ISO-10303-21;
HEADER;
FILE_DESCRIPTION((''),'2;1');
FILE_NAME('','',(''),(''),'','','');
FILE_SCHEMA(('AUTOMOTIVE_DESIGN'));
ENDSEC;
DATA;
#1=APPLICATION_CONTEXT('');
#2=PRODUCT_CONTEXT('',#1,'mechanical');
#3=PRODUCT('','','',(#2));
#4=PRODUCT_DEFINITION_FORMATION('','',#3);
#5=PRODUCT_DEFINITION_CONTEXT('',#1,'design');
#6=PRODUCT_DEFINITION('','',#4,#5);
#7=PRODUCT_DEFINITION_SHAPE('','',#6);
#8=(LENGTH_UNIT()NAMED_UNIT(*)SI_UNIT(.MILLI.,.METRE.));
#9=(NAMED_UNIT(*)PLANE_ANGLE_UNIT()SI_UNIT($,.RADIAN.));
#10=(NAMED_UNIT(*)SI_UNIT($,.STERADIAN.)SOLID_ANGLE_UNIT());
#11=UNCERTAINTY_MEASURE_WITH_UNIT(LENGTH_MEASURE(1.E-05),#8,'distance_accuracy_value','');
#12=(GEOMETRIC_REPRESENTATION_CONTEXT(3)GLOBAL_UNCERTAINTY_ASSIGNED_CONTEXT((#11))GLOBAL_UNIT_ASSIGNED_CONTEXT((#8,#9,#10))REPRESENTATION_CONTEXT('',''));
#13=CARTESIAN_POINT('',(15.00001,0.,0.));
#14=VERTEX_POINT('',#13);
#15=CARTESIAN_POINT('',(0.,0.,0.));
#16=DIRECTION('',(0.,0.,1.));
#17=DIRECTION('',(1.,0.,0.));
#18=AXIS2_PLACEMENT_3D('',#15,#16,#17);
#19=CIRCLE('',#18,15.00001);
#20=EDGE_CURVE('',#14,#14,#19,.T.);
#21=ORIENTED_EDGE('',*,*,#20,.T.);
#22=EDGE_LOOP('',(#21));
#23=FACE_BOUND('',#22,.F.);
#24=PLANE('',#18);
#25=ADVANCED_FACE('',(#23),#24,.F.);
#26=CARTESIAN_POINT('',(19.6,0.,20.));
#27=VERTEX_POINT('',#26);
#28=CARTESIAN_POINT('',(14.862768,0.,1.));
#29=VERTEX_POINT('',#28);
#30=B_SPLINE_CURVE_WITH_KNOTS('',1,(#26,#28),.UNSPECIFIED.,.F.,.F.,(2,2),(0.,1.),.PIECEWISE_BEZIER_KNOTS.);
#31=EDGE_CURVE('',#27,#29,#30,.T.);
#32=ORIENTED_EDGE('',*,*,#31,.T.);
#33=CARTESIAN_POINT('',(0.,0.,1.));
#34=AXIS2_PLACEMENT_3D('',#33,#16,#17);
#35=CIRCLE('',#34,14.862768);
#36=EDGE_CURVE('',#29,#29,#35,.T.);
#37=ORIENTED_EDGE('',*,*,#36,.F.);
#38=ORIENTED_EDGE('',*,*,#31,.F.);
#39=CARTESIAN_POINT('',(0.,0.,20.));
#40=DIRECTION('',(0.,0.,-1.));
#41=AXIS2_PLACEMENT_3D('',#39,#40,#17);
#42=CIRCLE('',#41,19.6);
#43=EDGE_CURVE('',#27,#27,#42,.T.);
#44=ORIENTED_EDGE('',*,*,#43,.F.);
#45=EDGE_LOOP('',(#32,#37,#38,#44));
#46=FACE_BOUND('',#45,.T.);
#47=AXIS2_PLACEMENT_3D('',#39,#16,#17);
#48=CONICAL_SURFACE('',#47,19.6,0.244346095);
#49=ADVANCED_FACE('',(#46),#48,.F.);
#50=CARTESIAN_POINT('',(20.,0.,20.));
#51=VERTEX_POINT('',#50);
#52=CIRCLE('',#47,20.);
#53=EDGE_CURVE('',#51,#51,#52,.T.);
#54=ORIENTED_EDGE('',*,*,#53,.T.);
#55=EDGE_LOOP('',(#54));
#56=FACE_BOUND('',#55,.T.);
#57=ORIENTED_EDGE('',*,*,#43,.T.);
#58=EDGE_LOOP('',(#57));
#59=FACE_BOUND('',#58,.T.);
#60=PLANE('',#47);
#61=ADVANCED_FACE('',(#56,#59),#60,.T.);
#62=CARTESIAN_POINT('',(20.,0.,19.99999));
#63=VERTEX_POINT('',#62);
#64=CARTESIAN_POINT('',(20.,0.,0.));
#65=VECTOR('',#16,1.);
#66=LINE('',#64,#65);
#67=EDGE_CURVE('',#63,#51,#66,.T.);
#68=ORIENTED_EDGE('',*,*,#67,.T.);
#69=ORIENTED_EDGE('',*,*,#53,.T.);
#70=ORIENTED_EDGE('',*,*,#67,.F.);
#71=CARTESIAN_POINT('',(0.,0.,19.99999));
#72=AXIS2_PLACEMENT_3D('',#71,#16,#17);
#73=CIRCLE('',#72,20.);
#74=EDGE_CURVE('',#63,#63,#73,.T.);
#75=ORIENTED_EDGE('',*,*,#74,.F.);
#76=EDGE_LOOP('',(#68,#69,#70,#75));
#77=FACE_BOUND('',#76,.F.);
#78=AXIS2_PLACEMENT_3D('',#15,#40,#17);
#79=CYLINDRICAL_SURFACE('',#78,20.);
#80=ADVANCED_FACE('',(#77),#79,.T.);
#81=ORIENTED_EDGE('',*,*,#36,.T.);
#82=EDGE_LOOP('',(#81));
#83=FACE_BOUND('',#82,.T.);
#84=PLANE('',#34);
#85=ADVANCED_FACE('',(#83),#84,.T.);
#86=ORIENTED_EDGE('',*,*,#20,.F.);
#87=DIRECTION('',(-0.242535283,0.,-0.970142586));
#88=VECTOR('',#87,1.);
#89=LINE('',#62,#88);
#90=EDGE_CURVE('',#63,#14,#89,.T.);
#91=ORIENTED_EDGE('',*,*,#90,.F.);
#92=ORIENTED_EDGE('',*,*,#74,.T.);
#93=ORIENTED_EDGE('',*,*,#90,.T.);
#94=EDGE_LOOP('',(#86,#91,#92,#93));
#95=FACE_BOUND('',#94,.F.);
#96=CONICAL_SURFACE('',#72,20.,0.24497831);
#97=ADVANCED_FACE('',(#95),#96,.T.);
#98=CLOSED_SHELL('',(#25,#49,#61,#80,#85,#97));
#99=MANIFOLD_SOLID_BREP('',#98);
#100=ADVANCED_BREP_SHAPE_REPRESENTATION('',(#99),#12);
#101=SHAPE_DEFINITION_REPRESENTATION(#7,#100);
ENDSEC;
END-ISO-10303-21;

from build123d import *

# Parameters (mm, degrees)
F0_R     = 20
F1_DEPTH = 20
F2_SIZE2 = 4.99999
F2_SIZE  = 19.99999
F3_R     = 19.6
F4_DEPTH = 19
F4_TAPER = 14


# Not quite as in the source:
# - a fillet or chamfer is up to 0.001 mm smaller than in the source, because OpenCascade refuses the exact size


with BuildPart() as f1:
    # F0 (on Top) → F1 (new body)
    with BuildSketch(Plane.XY):
        Circle(F0_R)
    extrude(amount=F1_DEPTH)

    # F2 (size 20 and 5 in the source; OpenCascade refuses exactly that, so slightly less here)
    f2_edges = [f1.edges().sort_by_distance(p)[0] for p in [
        (-20, 0, 0),
    ]]
    f2_side = f1.faces().sort_by_distance((-20, 0, 10))[0]
    chamfer(f2_edges, length=F2_SIZE, length2=F2_SIZE2, reference=f2_side)

    # F3 (on face) → F4 (cut)
    with BuildSketch(Plane.XY.offset(20)):
        Circle(F3_R)
    extrude(amount=-F4_DEPTH, taper=F4_TAPER, mode=Mode.SUBTRACT)


solid = f1.part
